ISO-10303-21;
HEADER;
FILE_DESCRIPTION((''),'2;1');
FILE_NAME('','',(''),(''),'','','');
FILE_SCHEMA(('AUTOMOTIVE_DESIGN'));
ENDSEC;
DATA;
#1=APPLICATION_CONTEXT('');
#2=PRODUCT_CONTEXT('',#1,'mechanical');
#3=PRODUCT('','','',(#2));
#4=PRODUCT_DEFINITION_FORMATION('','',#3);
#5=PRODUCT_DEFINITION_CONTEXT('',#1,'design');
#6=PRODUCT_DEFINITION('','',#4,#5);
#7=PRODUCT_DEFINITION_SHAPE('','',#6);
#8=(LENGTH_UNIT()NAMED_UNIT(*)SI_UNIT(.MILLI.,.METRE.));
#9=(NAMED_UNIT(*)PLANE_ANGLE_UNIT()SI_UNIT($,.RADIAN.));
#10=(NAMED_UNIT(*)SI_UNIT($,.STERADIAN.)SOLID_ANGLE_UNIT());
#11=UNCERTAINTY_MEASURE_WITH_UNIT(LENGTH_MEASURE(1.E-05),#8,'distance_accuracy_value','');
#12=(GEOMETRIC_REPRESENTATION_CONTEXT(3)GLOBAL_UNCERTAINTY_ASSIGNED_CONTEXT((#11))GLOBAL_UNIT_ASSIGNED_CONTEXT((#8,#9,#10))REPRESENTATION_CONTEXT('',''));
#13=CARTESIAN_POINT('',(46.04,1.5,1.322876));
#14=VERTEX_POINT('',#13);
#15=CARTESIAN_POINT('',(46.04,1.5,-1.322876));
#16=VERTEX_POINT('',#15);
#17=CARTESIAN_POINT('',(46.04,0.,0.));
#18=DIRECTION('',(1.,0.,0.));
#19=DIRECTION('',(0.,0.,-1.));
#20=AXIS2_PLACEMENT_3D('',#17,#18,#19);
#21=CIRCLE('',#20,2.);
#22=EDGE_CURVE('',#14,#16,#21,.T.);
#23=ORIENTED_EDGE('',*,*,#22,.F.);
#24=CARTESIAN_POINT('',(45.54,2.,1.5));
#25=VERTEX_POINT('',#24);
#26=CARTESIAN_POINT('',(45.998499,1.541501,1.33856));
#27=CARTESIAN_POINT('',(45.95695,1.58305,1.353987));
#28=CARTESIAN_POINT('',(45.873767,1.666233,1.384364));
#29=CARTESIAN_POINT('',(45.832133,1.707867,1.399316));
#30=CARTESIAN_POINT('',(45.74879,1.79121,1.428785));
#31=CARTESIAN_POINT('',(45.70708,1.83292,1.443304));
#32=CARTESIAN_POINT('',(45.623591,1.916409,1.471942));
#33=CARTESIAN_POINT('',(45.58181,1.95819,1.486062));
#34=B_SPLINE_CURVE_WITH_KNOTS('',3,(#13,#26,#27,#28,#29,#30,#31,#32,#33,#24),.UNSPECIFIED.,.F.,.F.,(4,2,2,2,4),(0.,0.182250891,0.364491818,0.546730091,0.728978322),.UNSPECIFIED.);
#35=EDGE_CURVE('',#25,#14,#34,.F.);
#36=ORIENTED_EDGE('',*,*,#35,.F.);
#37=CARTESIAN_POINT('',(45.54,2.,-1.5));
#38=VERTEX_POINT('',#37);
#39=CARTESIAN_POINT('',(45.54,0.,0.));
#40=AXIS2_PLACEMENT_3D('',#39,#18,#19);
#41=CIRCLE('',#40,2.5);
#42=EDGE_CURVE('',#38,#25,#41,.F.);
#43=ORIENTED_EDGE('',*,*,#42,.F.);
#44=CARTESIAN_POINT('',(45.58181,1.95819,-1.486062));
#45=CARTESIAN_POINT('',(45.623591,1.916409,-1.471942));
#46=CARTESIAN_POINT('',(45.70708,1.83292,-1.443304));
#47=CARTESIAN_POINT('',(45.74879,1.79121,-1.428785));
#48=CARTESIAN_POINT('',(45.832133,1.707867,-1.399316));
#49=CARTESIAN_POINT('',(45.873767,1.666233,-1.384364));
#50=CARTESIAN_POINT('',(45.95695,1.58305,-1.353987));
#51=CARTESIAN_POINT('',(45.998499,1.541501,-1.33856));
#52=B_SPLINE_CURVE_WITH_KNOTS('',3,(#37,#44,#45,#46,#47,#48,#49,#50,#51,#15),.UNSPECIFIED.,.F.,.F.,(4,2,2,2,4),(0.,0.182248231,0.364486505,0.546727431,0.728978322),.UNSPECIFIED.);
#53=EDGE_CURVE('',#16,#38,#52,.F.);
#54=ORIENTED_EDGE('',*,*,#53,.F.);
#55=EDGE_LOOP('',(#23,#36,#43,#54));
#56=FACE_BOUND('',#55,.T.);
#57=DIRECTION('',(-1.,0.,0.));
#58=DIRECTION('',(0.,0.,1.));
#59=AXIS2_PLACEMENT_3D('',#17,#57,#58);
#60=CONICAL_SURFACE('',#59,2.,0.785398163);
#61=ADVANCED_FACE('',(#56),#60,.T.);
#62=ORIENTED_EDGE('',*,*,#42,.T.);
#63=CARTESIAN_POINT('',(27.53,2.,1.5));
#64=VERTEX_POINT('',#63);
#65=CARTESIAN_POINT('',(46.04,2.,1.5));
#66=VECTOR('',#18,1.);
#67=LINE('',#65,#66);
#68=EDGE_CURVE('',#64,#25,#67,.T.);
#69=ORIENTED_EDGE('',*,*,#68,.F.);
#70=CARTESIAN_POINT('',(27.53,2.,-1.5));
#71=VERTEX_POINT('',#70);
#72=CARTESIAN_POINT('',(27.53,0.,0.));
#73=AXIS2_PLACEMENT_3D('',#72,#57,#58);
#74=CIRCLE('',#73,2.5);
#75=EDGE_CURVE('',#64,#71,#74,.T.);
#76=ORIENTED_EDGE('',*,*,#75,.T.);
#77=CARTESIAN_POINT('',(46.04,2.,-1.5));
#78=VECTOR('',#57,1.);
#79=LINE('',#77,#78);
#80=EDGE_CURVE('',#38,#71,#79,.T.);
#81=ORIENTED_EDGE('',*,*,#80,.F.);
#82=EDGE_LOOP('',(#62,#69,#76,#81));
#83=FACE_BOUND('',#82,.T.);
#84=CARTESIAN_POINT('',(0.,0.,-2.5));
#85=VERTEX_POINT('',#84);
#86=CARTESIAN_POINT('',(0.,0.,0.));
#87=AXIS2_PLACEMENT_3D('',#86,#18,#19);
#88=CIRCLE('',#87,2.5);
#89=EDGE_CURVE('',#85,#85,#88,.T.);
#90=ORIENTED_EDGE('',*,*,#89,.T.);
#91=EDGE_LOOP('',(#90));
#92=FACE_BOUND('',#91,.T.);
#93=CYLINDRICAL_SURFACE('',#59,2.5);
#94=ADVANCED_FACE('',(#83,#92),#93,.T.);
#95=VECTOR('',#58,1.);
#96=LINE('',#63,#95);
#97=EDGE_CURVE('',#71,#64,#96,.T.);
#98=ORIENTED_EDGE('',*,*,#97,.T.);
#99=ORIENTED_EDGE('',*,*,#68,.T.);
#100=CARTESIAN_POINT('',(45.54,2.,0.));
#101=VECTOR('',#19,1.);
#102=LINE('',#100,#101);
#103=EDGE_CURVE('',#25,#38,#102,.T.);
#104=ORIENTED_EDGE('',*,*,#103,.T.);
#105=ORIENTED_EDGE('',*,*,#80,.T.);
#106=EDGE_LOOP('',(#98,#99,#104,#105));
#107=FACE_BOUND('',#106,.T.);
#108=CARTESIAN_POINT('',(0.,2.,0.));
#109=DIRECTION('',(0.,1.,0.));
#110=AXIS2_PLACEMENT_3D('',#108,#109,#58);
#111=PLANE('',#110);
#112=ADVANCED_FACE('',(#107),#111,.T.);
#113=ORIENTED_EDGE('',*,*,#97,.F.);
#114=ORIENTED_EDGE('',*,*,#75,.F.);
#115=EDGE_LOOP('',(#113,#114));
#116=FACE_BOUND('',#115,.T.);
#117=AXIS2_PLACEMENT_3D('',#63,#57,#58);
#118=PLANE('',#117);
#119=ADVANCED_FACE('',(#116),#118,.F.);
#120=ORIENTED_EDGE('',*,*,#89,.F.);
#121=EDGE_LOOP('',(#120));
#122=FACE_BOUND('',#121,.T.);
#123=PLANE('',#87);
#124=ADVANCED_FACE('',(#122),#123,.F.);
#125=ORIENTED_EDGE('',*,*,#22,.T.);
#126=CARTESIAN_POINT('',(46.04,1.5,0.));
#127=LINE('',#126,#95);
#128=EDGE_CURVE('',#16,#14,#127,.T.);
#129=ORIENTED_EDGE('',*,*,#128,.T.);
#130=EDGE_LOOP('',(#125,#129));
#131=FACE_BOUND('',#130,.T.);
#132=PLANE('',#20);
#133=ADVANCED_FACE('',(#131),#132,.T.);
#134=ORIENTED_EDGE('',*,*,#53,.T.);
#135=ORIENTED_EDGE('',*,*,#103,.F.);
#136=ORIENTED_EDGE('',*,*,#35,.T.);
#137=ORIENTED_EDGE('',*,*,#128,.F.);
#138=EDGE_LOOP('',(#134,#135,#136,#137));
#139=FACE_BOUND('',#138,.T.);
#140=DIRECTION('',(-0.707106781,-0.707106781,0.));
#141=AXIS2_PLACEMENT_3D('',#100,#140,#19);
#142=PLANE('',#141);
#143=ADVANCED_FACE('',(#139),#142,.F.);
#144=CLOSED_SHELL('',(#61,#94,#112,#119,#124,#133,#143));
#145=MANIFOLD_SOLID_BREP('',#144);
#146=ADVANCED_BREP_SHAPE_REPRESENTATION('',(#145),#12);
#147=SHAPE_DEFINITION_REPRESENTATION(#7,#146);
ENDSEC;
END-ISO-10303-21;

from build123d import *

# Parameters (mm, degrees)
SKETCH1_R           = 2.5
BOSS_EXTRUDE1_DEPTH = 46.04
SKETCH3_W           = 18.51
SKETCH3_H           = 3
CUT_EXTRUDE1_DEPTH  = 0.5
CHAMFER1_SIZE       = 0.5


with BuildPart() as part:
    # Sketch1 → Boss-Extrude1 (new body)
    with BuildSketch(Plane(origin=(0, 0, 0), x_dir=(0, 0, -1), z_dir=(1, 0, 0))):
        Circle(SKETCH1_R)
    extrude(amount=BOSS_EXTRUDE1_DEPTH)

    # Sketch3 → Cut-Extrude1 (cut)
    with BuildSketch(Plane(origin=(0, 2.5, 0), x_dir=(1, 0, 0), z_dir=(0, 1, 0))):
        with Locations((36.785, 0)):
            Rectangle(SKETCH3_W, SKETCH3_H)
    extrude(amount=-CUT_EXTRUDE1_DEPTH, mode=Mode.SUBTRACT)

    # Chamfer1
    chamfer1_edges = [part.edges().sort_by_distance(p)[0] for p in [
        (46.04, -2.236067977, 1.118033989),
        (46.04, 2, 0),
    ]]
    chamfer(chamfer1_edges, length=CHAMFER1_SIZE - 0.0001)  # a hair under: the kernel refuses the full size


solid = part.part
